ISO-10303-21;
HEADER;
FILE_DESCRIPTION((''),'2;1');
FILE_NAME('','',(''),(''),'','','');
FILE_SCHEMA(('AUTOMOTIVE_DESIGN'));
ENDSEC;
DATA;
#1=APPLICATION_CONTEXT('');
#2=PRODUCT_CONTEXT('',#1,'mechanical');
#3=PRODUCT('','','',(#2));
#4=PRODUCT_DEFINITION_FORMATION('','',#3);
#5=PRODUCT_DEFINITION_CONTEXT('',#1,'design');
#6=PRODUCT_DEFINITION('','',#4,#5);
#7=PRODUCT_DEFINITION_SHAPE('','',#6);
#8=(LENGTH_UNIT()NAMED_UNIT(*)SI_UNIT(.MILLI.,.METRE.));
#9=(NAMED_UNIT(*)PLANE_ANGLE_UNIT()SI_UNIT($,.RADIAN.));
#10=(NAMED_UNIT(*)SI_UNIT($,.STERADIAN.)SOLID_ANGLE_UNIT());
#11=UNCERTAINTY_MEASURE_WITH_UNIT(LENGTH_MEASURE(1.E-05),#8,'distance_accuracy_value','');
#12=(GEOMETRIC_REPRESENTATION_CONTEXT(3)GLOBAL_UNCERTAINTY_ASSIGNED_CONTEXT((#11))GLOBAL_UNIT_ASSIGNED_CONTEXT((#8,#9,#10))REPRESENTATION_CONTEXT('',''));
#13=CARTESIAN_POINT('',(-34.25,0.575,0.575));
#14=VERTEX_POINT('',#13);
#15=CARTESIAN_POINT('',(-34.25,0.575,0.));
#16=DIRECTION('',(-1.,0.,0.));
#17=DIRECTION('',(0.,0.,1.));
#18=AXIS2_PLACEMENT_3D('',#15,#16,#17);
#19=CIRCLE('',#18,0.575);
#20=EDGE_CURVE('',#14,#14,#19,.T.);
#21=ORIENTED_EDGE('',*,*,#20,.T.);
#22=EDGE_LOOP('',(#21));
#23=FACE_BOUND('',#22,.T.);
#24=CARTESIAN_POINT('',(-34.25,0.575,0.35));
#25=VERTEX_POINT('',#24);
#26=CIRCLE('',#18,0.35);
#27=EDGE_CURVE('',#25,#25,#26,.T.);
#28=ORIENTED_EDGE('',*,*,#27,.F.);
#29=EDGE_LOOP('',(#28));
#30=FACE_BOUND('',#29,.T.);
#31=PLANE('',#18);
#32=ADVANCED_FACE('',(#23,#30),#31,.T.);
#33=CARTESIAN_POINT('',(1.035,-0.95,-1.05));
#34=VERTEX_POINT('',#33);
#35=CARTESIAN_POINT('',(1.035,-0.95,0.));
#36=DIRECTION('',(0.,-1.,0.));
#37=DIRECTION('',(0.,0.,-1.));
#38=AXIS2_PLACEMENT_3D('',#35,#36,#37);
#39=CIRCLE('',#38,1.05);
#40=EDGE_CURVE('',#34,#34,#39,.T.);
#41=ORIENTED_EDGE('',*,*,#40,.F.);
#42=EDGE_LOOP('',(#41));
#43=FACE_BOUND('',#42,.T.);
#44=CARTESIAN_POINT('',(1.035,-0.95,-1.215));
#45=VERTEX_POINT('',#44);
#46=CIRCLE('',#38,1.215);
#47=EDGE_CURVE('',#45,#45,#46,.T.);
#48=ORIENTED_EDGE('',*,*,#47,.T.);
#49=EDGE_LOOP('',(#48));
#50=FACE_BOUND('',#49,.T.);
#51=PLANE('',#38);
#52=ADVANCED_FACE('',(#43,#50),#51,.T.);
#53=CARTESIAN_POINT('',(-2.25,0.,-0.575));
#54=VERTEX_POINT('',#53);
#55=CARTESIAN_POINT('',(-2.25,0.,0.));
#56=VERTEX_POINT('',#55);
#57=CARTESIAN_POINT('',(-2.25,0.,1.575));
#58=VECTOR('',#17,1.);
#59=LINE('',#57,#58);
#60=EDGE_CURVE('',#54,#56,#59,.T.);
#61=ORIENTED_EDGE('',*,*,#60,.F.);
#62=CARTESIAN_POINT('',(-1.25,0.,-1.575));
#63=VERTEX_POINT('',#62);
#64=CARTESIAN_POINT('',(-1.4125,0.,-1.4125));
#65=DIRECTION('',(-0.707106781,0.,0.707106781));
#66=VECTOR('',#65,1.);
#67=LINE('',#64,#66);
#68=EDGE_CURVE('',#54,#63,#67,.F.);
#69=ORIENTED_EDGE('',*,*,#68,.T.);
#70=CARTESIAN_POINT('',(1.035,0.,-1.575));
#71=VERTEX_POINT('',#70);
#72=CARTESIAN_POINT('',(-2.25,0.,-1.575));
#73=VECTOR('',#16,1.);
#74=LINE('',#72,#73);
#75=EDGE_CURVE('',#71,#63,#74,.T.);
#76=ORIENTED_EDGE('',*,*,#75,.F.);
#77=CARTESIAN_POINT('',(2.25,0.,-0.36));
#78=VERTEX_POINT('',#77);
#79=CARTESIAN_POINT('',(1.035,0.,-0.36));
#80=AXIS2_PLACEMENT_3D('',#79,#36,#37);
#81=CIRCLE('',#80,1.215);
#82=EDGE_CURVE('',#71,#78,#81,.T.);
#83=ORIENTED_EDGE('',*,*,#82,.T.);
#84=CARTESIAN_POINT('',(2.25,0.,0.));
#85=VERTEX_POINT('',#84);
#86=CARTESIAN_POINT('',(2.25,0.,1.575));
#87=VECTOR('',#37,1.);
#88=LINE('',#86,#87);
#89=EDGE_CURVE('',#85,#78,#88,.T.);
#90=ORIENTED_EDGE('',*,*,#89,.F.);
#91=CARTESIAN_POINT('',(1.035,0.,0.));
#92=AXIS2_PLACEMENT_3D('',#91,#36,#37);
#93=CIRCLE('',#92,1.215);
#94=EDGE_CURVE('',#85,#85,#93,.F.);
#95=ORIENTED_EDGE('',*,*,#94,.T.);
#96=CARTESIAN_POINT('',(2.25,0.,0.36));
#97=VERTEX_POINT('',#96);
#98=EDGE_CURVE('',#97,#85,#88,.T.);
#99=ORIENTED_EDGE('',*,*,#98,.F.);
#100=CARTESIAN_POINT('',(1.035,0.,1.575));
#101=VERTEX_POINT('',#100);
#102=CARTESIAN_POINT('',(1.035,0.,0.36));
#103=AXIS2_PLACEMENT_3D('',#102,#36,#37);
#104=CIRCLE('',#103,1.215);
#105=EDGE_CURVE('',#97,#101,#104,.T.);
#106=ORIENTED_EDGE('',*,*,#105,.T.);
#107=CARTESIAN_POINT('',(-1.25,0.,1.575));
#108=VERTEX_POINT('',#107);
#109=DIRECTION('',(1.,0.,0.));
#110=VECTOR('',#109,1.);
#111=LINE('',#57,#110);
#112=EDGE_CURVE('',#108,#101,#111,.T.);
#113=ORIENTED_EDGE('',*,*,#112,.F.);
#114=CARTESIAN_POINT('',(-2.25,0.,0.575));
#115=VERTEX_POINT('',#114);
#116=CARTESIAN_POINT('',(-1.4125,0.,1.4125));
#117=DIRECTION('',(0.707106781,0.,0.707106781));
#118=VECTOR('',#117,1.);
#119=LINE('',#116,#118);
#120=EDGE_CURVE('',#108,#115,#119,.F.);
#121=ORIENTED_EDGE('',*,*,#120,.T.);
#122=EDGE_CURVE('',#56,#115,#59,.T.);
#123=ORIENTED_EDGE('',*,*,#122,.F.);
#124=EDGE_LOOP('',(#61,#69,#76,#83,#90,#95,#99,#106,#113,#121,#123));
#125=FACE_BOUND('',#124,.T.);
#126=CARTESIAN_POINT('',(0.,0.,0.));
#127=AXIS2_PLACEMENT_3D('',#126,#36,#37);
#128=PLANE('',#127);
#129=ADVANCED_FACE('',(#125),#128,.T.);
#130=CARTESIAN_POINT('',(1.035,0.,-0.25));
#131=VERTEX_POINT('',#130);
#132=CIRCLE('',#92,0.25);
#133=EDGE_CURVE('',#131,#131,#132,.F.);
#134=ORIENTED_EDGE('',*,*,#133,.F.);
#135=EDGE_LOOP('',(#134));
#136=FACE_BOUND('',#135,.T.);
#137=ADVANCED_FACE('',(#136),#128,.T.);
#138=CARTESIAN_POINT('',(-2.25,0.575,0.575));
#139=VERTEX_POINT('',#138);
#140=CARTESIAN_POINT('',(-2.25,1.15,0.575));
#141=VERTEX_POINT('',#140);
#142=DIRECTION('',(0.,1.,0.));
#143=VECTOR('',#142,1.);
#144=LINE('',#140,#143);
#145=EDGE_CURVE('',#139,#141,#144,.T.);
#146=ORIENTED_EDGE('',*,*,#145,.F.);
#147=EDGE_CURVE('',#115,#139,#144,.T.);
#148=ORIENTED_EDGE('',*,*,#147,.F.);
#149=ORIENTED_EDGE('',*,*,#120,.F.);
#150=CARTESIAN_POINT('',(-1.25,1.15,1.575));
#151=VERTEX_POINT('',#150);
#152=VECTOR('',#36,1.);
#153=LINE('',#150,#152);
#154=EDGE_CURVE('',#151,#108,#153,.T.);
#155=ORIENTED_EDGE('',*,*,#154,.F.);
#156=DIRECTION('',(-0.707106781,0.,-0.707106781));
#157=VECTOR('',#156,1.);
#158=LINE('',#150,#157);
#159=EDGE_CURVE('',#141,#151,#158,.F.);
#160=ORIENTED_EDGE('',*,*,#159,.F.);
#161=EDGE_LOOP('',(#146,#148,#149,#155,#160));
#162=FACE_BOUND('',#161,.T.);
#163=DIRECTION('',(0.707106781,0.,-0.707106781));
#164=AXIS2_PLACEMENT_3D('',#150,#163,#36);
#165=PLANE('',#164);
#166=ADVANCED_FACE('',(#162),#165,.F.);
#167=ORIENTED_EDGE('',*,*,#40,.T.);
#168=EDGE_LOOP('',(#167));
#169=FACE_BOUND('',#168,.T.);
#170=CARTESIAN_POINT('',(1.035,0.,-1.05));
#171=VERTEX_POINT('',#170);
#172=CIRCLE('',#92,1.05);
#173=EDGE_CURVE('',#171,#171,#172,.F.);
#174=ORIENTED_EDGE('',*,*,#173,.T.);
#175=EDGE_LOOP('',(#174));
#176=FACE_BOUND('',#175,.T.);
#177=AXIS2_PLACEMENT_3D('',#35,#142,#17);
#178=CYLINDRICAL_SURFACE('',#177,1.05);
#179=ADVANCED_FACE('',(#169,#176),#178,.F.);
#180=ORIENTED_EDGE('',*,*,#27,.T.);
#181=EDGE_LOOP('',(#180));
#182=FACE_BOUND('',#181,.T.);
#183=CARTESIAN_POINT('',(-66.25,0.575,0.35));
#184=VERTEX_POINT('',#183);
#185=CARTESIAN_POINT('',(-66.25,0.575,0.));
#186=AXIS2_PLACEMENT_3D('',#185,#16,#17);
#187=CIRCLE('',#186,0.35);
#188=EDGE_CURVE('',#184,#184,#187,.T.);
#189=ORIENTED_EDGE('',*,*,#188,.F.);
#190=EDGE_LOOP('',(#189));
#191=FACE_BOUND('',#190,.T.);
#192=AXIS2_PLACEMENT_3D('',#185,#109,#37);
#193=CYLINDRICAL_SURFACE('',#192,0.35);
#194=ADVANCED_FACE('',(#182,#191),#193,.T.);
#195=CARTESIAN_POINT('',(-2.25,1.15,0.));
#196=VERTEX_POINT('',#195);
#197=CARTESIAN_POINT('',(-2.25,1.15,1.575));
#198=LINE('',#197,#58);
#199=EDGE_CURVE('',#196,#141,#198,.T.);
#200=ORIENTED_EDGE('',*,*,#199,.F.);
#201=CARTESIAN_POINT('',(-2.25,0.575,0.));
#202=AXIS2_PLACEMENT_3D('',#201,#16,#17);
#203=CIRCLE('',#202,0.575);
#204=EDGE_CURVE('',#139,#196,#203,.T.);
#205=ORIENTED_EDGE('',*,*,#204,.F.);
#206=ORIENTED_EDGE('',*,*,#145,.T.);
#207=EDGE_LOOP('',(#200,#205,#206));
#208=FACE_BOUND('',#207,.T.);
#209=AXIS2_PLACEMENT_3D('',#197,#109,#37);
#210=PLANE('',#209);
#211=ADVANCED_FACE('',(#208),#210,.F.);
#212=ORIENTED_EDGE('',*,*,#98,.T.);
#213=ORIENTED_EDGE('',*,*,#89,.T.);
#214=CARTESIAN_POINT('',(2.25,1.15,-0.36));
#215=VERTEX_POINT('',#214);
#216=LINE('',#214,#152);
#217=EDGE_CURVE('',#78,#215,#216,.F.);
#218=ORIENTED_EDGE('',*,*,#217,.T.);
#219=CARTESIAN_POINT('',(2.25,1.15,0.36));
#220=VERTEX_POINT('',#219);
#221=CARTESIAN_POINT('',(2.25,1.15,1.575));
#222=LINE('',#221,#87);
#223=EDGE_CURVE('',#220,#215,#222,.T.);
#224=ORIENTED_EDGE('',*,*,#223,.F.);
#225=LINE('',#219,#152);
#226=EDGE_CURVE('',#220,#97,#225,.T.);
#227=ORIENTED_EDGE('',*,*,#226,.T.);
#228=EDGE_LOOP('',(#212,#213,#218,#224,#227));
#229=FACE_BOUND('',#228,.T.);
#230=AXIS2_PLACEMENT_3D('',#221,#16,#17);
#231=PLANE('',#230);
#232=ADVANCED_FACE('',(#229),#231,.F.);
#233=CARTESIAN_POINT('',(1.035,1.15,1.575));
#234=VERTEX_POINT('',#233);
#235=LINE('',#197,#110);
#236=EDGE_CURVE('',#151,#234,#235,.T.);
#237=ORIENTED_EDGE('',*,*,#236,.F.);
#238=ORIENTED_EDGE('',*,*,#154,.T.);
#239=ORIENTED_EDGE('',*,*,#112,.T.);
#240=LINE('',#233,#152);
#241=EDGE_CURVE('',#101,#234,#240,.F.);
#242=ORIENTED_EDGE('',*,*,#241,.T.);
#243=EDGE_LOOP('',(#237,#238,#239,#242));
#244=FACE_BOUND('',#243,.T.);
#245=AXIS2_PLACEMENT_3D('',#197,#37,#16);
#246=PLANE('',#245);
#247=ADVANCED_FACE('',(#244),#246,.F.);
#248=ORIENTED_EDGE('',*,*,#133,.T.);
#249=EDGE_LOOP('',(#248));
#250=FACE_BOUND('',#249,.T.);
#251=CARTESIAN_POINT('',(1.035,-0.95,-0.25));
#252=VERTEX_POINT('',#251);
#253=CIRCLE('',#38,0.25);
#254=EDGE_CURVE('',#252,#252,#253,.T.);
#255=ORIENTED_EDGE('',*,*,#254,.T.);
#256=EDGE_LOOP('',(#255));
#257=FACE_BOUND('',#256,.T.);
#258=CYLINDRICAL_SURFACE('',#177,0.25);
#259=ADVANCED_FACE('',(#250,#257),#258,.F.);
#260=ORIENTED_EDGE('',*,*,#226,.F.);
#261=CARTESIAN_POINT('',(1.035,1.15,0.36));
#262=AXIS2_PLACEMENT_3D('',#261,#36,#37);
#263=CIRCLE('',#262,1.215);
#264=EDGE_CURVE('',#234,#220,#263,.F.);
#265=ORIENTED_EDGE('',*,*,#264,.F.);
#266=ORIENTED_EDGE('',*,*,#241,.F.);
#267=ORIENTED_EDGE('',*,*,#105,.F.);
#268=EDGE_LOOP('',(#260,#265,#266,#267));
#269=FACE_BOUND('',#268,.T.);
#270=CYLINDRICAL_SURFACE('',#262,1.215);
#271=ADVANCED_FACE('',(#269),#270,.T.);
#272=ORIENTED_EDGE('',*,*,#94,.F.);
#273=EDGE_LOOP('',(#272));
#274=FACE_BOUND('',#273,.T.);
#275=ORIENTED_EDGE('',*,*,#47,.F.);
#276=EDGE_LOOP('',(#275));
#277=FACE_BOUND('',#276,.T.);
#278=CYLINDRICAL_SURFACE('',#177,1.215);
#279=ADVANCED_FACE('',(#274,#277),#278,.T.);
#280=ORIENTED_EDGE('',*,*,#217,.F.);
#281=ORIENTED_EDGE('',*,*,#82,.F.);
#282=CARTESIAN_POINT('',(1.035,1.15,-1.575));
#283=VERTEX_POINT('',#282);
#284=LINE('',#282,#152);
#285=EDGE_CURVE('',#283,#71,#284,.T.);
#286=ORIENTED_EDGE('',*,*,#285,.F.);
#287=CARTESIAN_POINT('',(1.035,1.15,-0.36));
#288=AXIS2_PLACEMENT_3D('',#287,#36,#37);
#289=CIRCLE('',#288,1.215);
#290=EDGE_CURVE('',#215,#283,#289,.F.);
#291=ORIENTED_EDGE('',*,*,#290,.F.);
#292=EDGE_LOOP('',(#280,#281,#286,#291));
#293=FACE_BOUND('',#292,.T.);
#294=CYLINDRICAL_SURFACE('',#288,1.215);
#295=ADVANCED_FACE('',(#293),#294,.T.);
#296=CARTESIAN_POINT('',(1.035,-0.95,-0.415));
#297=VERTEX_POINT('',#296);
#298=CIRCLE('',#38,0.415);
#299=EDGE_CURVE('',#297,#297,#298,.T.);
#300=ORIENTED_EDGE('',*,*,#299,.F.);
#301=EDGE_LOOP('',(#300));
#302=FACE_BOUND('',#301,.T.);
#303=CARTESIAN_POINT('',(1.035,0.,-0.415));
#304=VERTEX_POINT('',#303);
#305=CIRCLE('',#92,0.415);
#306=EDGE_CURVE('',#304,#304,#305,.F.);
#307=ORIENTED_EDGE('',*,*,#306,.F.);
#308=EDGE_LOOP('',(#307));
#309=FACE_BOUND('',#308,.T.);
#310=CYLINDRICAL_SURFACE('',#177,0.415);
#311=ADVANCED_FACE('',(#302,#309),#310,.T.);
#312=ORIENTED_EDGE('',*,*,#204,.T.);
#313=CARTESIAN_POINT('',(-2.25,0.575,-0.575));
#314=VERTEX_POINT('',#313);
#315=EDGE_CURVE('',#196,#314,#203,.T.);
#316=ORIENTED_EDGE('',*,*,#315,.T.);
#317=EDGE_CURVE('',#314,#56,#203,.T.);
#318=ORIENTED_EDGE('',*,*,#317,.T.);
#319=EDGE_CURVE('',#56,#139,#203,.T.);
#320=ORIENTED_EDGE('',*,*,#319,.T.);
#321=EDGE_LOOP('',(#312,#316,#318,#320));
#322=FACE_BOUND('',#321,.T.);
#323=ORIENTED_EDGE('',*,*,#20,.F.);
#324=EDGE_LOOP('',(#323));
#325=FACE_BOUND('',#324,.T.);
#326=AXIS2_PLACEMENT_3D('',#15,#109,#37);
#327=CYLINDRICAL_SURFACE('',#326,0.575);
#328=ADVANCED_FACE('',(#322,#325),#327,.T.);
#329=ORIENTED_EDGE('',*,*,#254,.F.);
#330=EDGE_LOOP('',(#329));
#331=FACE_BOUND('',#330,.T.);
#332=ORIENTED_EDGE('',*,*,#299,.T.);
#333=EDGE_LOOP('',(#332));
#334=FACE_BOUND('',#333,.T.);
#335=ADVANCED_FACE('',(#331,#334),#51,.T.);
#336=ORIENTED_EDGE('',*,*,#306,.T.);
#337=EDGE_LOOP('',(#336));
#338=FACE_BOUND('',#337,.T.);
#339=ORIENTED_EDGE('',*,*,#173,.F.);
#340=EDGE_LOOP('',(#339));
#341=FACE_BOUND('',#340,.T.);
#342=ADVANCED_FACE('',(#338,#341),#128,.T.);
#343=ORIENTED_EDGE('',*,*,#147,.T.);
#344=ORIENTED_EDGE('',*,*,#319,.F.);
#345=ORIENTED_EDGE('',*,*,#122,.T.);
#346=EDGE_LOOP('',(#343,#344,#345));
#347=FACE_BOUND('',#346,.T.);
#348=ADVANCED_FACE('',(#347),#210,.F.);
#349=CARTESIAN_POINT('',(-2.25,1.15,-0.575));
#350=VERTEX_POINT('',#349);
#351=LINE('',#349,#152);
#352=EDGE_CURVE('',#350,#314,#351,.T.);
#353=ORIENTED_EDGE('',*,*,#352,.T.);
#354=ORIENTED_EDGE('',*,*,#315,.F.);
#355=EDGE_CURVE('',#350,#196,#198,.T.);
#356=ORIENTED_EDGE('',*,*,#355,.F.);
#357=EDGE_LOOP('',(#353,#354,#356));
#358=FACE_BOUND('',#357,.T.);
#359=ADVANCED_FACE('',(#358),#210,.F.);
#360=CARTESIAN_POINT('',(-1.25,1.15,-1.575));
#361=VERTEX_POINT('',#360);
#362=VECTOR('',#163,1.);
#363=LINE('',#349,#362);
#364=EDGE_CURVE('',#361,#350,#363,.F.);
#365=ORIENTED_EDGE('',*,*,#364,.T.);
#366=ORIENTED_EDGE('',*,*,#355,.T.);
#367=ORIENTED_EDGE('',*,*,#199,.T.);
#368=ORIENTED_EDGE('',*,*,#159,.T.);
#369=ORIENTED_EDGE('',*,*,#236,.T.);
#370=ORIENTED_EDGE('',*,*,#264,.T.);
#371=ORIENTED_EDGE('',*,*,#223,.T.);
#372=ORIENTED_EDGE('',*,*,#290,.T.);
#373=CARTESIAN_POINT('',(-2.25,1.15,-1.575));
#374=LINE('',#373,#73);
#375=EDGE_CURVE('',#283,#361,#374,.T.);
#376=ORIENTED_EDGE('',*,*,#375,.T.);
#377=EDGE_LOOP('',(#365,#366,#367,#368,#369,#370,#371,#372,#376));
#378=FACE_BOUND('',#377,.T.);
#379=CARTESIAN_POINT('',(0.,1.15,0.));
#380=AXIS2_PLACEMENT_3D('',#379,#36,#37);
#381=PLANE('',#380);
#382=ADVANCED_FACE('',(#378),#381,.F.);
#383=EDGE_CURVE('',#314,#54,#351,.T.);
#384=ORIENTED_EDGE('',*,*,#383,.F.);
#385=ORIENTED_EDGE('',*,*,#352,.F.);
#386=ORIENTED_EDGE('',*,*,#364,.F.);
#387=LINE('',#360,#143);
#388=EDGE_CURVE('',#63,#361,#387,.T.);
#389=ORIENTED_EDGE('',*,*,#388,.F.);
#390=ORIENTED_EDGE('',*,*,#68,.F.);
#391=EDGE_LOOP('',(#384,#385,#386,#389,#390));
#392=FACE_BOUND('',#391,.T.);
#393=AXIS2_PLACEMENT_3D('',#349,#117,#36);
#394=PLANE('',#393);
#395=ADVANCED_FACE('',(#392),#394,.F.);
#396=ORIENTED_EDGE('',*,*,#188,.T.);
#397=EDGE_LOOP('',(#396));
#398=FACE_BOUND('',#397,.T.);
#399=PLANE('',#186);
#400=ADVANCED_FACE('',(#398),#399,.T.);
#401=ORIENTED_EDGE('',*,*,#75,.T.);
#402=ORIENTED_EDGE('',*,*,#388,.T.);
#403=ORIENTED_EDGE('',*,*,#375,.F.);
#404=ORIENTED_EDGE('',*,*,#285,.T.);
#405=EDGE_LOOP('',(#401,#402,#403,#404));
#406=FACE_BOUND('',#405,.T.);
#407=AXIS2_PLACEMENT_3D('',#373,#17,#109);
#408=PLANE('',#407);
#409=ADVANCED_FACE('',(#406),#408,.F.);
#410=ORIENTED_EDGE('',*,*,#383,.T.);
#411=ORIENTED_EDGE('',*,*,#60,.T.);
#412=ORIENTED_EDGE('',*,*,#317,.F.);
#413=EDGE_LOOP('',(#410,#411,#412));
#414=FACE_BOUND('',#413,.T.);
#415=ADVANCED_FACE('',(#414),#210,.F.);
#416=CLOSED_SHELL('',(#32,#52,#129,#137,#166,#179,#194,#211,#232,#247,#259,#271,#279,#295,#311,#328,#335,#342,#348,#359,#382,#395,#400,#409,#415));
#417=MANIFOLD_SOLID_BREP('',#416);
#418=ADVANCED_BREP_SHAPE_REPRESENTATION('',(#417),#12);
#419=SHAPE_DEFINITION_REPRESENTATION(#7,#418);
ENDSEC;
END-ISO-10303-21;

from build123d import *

# Parameters (mm, degrees)
SKETCH1_W           = 4.5
SKETCH1_H           = 3.15
BOSS_EXTRUDE1_DEPTH = 1.15
BOSS_EXTRUDE2_START = -1.15
SKETCH2_R           = 1.215
SKETCH2_R_2         = 1.05
SKETCH2_R_3         = 0.415
SKETCH2_R_4         = 0.25
BOSS_EXTRUDE2_DEPTH = 2.1
SKETCH3_R           = 0.575
BOSS_EXTRUDE3_DEPTH = 32
SKETCH4_R           = 0.35
BOSS_EXTRUDE4_DEPTH = 32
FILLET1_R           = 1.215
CHAMFER2_SIZE       = 1


with BuildPart() as part:
    # Sketch1 → Boss-Extrude1 (new body)
    with BuildSketch(Plane(origin=(0, 0, 0), x_dir=(1, 0, 0), z_dir=(0, 1, 0))):
        Rectangle(SKETCH1_W, SKETCH1_H)
    extrude(amount=BOSS_EXTRUDE1_DEPTH)

    # Sketch2 → Boss-Extrude2 (add)
    # profile 1 of 2: a face of its own
    with BuildSketch(Plane.XZ.offset(BOSS_EXTRUDE2_START)):
        with Locations((1.035, 0)):
            Circle(SKETCH2_R)
        with Locations(Location((1.035, 0, 0), (0, 0, 270))):
            Circle(SKETCH2_R_2, mode=Mode.SUBTRACT)
    # profile 2 of 2: a face of its own
    with BuildSketch(Plane.XZ.offset(BOSS_EXTRUDE2_START)):
        with Locations(Location((1.035, 0, 0), (0, 0, 270))):
            Circle(SKETCH2_R_3)
        with Locations(Location((1.035, 0, 0), (0, 0, 270))):
            Circle(SKETCH2_R_4, mode=Mode.SUBTRACT)
    extrude(amount=BOSS_EXTRUDE2_DEPTH)

    # Sketch3 → Boss-Extrude3 (add)
    with BuildSketch(Plane.ZY.offset(2.25)):
        with Locations(Location((0, 0.575, 0), (0, 0, 270))):
            Circle(SKETCH3_R)
    extrude(amount=BOSS_EXTRUDE3_DEPTH)

    # Sketch4 → Boss-Extrude4 (add)
    with BuildSketch(Plane.ZY.offset(34.25)):
        with Locations((0, 0.575)):
            Circle(SKETCH4_R)
    extrude(amount=BOSS_EXTRUDE4_DEPTH)

    # Fillet1
    fillet1_edges = [part.edges().sort_by_distance(p)[0] for p in [
        (2.25, 0.575, 1.575),
        (2.25, 0.575, -1.575),
    ]]
    fillet(fillet1_edges, radius=FILLET1_R)

    # Chamfer2
    chamfer2_edges = [part.edges().sort_by_distance(p)[0] for p in [
        (-2.25, 0.575, 1.575),
        (-2.25, 0.575, -1.575),
    ]]
    chamfer(chamfer2_edges, length=CHAMFER2_SIZE - 0.0001)  # a hair under: the kernel refuses the full size


solid = part.part
